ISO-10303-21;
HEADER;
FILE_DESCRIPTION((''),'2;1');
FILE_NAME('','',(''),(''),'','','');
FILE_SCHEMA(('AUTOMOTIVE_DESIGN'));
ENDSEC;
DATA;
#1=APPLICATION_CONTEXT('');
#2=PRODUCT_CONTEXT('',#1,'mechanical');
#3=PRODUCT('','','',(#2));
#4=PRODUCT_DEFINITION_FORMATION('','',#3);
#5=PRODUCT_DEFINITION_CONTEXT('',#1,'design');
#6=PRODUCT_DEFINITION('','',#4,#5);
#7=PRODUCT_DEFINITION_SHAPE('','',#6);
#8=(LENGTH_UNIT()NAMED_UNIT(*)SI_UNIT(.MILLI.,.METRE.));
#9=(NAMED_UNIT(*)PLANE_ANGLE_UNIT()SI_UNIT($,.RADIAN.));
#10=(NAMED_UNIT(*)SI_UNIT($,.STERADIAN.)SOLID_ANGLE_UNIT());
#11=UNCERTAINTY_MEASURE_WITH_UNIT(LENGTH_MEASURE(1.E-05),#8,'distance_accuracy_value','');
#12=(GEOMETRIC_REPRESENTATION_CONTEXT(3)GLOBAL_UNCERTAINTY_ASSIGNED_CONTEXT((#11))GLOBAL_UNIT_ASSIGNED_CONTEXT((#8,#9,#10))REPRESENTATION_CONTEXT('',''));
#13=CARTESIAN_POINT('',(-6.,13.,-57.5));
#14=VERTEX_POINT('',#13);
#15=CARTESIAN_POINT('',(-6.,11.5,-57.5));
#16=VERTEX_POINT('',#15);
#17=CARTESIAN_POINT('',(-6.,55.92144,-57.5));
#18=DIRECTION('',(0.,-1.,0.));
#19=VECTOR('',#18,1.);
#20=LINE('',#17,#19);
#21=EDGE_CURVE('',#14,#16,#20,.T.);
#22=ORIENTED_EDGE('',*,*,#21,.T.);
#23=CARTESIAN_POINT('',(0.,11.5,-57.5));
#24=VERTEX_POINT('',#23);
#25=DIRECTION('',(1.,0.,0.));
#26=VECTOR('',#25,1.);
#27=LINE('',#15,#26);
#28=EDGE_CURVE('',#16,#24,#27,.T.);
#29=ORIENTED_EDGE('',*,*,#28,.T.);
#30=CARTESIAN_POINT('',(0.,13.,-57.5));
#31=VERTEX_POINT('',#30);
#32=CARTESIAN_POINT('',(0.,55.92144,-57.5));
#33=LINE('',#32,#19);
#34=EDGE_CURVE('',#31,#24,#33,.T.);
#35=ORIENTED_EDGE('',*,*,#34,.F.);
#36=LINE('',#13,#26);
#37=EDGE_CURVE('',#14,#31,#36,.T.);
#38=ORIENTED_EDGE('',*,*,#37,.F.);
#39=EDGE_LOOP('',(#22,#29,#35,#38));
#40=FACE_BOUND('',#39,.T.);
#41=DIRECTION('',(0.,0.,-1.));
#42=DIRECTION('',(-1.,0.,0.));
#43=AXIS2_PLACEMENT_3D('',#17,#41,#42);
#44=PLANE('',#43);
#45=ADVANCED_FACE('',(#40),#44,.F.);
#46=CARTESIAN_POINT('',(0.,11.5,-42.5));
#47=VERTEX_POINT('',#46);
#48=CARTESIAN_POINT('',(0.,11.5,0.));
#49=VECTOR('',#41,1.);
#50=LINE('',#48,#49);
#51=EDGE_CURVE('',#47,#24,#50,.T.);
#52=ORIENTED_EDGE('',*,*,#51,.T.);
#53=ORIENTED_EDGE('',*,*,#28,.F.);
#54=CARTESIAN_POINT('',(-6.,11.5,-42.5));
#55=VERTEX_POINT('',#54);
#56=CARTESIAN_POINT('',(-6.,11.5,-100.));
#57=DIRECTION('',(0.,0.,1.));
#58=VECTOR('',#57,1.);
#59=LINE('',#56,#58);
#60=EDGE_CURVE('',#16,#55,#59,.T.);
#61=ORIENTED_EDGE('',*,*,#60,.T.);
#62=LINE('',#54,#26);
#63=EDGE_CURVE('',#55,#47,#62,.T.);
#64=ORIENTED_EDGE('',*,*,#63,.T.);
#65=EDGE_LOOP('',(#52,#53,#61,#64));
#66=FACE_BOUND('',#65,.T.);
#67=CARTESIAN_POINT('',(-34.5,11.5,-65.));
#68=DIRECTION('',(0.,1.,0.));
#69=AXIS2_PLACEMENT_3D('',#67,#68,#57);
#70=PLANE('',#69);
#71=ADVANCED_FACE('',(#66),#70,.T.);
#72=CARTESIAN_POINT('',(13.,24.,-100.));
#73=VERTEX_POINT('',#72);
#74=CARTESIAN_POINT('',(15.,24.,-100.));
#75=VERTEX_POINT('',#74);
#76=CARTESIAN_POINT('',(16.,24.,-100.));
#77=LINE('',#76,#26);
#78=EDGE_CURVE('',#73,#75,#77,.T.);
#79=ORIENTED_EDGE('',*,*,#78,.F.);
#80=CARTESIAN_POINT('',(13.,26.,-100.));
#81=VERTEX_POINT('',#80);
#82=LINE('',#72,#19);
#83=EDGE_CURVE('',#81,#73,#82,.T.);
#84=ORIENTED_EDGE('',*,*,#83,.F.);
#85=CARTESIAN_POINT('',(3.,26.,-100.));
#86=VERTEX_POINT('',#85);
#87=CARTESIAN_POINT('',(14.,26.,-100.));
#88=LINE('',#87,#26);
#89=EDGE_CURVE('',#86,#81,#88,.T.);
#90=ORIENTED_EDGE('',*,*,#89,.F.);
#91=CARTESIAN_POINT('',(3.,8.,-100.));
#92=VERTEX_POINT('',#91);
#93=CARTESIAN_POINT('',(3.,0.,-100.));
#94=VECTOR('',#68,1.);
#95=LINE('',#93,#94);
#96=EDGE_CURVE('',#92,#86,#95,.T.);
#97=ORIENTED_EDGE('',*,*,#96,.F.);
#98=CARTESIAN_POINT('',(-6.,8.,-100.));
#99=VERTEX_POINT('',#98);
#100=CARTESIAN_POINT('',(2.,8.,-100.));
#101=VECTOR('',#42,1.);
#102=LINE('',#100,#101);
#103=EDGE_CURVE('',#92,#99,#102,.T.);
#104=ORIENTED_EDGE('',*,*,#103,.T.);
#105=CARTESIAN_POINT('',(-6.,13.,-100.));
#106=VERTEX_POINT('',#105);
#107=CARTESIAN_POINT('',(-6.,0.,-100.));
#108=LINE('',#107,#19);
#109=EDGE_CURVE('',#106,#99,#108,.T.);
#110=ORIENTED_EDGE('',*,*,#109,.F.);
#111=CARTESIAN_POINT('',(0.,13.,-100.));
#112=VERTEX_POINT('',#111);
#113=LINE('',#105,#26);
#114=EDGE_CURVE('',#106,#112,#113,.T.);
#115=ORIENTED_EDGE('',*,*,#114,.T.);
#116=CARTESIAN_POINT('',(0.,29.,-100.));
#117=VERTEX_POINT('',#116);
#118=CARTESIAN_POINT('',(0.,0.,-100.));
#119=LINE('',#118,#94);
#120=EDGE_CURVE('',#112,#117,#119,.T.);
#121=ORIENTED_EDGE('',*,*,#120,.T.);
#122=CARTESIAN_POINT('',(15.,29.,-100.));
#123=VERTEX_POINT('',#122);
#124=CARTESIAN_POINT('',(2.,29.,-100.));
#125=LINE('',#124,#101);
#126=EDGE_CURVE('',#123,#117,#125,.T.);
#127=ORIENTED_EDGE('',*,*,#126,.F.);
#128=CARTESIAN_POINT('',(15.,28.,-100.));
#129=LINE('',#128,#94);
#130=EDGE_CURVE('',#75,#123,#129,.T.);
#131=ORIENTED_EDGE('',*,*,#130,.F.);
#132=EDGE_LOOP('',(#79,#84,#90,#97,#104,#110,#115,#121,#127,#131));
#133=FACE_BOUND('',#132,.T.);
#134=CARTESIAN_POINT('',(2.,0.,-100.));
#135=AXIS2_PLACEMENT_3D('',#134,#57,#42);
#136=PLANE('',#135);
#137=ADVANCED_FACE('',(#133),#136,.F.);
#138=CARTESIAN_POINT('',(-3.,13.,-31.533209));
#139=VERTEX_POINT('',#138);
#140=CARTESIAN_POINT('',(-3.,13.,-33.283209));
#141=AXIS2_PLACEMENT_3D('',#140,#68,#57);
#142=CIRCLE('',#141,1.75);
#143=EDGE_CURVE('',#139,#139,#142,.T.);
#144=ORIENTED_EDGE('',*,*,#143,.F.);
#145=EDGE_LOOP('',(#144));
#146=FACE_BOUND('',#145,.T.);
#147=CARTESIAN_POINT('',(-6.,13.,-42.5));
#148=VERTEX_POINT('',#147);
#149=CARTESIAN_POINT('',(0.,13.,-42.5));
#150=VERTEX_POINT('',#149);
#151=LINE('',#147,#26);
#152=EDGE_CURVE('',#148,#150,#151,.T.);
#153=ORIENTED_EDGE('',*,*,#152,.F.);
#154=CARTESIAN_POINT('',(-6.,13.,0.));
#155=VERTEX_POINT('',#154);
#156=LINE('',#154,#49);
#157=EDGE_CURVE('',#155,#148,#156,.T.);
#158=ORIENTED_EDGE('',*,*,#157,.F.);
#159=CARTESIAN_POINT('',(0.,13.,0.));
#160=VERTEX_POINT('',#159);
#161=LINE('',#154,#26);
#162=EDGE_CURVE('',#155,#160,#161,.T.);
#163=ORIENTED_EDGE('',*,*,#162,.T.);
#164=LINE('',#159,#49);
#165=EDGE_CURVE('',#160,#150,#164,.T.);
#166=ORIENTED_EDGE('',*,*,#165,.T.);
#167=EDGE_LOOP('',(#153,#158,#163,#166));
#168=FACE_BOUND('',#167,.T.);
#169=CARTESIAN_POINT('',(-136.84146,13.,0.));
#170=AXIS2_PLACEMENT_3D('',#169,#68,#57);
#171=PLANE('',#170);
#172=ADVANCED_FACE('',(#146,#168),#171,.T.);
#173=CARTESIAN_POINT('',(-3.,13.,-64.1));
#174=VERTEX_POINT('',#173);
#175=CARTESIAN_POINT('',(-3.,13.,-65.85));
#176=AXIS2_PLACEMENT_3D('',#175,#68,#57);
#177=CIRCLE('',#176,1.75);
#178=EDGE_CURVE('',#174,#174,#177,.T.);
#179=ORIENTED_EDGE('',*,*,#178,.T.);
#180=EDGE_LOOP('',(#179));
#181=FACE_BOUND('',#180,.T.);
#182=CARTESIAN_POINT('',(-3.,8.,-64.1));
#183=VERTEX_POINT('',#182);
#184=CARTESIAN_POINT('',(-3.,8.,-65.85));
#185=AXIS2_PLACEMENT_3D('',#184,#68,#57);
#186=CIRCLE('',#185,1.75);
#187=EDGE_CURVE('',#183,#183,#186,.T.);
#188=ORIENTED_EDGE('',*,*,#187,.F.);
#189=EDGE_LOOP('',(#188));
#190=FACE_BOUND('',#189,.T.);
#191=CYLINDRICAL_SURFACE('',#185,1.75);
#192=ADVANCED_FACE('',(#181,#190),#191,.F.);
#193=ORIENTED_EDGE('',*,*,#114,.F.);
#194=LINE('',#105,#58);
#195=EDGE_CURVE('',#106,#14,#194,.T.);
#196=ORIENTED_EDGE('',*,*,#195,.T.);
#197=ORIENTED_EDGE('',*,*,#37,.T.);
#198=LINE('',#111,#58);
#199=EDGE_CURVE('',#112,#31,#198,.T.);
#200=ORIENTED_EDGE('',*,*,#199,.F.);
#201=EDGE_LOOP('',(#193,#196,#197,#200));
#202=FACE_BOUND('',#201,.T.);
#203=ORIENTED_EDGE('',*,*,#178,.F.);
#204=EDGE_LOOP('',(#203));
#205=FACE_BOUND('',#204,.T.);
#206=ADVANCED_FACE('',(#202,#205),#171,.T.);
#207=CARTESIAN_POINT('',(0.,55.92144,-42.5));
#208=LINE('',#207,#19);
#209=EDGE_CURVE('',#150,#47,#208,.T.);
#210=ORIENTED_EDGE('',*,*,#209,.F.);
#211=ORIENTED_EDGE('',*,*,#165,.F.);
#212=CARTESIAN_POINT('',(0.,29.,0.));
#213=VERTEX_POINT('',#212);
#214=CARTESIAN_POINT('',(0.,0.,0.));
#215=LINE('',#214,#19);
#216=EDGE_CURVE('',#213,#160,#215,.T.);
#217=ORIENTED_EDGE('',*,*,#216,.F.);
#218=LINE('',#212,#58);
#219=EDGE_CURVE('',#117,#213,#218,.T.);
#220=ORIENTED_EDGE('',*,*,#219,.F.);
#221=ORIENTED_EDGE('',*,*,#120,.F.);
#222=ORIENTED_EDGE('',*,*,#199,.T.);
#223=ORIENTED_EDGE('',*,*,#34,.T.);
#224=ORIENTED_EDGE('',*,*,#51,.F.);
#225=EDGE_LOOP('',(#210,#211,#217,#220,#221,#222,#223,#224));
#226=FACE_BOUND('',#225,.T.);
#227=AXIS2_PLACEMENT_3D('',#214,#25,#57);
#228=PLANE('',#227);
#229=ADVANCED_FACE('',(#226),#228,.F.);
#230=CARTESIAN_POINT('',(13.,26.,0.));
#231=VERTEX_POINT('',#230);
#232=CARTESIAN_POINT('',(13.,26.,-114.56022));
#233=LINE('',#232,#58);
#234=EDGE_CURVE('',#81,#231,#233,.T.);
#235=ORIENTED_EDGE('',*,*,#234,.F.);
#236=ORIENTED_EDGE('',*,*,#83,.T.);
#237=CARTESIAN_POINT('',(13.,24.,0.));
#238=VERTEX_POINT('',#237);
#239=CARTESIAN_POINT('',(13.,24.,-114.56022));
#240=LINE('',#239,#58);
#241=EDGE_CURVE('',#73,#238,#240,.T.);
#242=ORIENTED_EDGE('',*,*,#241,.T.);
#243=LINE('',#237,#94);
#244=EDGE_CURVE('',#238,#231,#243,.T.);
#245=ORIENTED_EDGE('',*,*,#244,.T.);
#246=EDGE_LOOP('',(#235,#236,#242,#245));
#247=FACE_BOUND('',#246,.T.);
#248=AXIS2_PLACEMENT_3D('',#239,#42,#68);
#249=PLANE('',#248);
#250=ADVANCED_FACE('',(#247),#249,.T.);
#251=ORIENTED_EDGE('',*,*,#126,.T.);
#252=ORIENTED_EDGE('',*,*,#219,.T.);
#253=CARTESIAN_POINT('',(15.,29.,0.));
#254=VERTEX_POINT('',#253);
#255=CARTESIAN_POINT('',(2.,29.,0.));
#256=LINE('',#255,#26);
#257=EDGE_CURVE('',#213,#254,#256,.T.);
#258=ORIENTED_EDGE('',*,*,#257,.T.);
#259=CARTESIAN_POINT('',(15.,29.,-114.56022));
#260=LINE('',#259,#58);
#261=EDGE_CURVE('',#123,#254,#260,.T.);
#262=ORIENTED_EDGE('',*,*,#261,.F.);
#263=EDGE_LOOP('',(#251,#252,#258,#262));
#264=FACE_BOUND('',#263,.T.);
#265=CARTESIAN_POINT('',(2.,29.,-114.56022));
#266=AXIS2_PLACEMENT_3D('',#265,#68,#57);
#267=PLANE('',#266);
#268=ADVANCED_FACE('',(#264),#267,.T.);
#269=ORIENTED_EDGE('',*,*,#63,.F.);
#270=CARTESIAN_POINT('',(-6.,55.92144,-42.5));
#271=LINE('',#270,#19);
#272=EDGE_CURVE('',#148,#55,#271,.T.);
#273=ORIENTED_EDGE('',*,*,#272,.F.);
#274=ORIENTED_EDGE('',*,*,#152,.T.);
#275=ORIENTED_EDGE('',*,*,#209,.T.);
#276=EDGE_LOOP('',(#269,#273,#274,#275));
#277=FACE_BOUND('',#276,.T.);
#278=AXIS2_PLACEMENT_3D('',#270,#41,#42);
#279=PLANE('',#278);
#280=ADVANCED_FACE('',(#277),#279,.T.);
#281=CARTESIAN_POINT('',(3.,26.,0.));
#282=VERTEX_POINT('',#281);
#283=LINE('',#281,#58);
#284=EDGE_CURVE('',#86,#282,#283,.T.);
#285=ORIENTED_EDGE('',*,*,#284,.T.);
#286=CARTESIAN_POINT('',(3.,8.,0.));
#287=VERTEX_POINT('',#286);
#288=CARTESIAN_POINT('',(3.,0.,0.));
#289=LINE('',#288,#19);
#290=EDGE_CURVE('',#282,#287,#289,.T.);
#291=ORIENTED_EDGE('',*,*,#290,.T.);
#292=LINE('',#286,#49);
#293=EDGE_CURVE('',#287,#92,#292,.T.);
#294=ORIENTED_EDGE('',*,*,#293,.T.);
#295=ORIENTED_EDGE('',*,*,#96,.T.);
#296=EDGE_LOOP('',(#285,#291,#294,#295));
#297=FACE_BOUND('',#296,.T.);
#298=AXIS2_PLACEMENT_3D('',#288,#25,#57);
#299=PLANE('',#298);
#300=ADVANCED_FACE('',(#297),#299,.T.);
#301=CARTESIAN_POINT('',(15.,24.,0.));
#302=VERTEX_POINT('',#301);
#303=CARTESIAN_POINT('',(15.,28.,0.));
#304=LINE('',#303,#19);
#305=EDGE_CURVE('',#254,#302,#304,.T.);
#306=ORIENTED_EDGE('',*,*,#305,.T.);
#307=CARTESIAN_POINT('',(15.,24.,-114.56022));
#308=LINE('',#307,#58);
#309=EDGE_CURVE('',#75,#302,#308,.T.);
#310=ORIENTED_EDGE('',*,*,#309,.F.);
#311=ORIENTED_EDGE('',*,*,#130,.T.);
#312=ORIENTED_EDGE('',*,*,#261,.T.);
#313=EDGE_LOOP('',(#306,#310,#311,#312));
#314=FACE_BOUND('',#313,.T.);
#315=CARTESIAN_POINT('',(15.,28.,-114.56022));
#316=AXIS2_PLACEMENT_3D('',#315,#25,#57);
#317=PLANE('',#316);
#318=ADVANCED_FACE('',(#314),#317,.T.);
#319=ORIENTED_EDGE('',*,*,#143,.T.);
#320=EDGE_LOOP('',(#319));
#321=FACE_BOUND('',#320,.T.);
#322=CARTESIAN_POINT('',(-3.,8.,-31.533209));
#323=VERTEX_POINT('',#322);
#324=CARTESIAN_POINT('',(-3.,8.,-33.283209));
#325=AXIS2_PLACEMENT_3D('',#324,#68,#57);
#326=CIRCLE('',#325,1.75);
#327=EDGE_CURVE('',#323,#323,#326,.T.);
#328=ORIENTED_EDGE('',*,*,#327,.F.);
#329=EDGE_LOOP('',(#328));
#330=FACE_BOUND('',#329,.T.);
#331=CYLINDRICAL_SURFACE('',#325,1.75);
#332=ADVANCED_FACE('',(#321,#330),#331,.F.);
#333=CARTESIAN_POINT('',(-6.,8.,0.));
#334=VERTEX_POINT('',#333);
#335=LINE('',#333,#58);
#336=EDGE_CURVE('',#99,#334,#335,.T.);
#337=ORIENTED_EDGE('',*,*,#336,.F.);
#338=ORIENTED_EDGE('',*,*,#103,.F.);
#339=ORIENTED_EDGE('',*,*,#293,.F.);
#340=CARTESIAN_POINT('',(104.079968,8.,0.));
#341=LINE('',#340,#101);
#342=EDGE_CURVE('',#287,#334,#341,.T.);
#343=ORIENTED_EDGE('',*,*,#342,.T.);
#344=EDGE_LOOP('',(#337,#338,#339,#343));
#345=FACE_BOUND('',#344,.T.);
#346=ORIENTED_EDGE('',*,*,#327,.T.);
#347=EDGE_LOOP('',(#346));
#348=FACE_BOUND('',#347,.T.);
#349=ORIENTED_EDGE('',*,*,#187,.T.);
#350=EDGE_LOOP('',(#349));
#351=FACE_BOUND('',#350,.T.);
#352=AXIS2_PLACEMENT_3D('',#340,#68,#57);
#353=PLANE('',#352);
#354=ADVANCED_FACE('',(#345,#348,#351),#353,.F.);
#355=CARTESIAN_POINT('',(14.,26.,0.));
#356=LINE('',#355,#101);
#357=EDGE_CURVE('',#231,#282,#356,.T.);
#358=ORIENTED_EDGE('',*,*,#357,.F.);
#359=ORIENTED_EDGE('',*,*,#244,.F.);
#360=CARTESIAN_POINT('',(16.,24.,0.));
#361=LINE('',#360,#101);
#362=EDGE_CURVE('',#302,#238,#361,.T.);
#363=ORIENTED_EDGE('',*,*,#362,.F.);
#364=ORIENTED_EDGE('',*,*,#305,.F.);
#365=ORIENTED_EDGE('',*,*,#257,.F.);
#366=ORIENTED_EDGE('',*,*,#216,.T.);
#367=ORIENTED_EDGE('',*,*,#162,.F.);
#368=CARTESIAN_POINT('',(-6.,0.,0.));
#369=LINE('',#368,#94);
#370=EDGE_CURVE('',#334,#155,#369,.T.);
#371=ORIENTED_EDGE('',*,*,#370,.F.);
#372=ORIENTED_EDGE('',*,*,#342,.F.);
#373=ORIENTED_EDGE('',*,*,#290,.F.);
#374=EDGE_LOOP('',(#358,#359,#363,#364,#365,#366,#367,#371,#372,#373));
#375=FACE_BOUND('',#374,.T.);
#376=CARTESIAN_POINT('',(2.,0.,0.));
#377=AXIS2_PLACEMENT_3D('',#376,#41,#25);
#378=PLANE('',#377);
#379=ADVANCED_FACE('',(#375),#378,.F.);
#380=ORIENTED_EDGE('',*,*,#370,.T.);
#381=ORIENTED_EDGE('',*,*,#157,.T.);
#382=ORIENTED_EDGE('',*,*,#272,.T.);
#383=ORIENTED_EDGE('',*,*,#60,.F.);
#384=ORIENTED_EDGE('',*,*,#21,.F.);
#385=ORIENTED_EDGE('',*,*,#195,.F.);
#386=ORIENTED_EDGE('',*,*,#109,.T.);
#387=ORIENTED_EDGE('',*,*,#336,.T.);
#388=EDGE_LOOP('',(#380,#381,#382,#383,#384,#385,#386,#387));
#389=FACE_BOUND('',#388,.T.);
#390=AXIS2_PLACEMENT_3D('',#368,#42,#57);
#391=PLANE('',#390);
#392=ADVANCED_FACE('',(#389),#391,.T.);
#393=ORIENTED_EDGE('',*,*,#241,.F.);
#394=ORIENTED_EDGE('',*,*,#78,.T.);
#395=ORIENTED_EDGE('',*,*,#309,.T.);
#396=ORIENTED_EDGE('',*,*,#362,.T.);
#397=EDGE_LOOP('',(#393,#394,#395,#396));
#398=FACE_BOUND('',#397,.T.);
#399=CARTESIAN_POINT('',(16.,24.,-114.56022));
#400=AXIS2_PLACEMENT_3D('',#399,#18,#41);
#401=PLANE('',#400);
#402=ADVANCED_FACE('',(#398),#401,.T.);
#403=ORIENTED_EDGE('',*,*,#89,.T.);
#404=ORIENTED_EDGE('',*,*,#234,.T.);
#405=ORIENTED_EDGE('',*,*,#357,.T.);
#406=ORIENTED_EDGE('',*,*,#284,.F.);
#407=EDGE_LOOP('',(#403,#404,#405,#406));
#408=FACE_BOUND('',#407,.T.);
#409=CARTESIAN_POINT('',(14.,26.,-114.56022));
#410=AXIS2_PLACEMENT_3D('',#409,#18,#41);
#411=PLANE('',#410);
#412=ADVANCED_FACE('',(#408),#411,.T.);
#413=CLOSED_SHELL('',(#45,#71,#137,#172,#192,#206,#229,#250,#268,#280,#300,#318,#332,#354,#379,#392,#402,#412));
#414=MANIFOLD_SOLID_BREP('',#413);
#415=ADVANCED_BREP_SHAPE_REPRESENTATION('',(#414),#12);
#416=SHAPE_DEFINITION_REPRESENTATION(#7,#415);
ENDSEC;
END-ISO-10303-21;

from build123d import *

# Parameters (mm, degrees)
SKETCH1_W            = 100
SKETCH1_H            = 26
BOSS_EXTRUDE1_DEPTH  = 2
BOSS_EXTRUDE2_DEPTH  = 100
MOVE_START           = -100
MOVE_FACE1_OUTLINE_W = 2
MOVE_FACE1_OUTLINE_H = 28
MOVE_FACE1_DEPTH     = 100
SKETCH5_W            = 100
SKETCH5_H            = 4
BOSS_EXTRUDE3_DEPTH  = 6
SKETCH6_W            = 100
SKETCH6_H            = 4
BOSS_EXTRUDE4_DEPTH  = 4
SKETCH7_W            = 6
SKETCH7_H            = 100
BOSS_EXTRUDE5_DEPTH  = 11.5
MOVE_FACE2_BY        = 12
SKETCH8_W            = 6
SKETCH8_H            = 42.5
BOSS_EXTRUDE6_DEPTH  = 1.5
SKETCH9_R            = 1.75
CUT_EXTRUDE1_DEPTH   = 103.376755174
MOVE_FACE3_BY        = 1
MOVE_FACE3_2_BY      = 1
MOVE_FACE3_3_BY      = 1
MOVE_FACE4_BY        = 1


# Read off the part's stored shape, not the designer's step: Move Face1
with BuildPart() as part:
    # Sketch1 → Boss-Extrude1 (new body)
    with BuildSketch(Plane(origin=(0, 0, 0), x_dir=(0, 0, -1), z_dir=(1, 0, 0))):
        with Locations((50, 13)):
            Rectangle(SKETCH1_W, SKETCH1_H)
    extrude(amount=BOSS_EXTRUDE1_DEPTH)

    # Sketch2 → Boss-Extrude2 (add)
    with BuildSketch(Plane.XY):
        Polygon((2, 26), (2, 28), (-12, 28), (-12, 24), (-10, 24), (-10, 26), align=None)
    extrude(amount=-BOSS_EXTRUDE2_DEPTH)


with BuildPart() as body_2:
    # Mirror1: mirrored copy
    add(part.part.mirror(Plane.ZY.offset(-2)))

    # Move Face1 outline → Move Face1 (add)
    with BuildSketch(Plane.XY.offset(MOVE_START)):
        with Locations((1, 14)):
            Rectangle(MOVE_FACE1_OUTLINE_W, MOVE_FACE1_OUTLINE_H)
    extrude(amount=MOVE_FACE1_DEPTH)



with BuildPart() as body_2_2:
    # Sketch5 → Boss-Extrude3 (new body)
    with BuildSketch(Plane.ZY):
        with Locations((-50, -2)):
            Rectangle(SKETCH5_W, SKETCH5_H)
    extrude(amount=BOSS_EXTRUDE3_DEPTH)


with BuildPart() as body_2_1:
    add(body_2.part)

    add(body_2_2.part)  # Boss-Extrude4 merges body 2 2
    # Sketch6 → Boss-Extrude4 (add)
    with BuildSketch(Plane(origin=(0, 0, 0), x_dir=(0, 0, -1), z_dir=(1, 0, 0))):
        with Locations((50, -2)):
            Rectangle(SKETCH6_W, SKETCH6_H)
    extrude(amount=BOSS_EXTRUDE4_DEPTH)

    # Sketch7 → Boss-Extrude5 (add)
    with BuildSketch(Plane(origin=(0, 0, 0), x_dir=(1, 0, 0), z_dir=(0, 1, 0))):
        with Locations((-3, 50)):
            Rectangle(SKETCH7_W, SKETCH7_H)
    extrude(amount=BOSS_EXTRUDE5_DEPTH)

    # Move Face2: a face moved inward by 12.0
    extrude(body_2_1.faces().sort_by_distance((-1, -4, -50))[0], amount=MOVE_FACE2_BY, dir=(0, 1, 0), mode=Mode.SUBTRACT)

    # Sketch8 → Boss-Extrude6 (add)
    with BuildSketch(Plane(origin=(0, 11.5, 0), x_dir=(1, 0, 0), z_dir=(0, 1, 0))):
        with Locations((-3, 78.75)):
            Rectangle(SKETCH8_W, SKETCH8_H)
        with Locations((-3, 21.25)):
            Rectangle(SKETCH8_W, SKETCH8_H)
    extrude(amount=BOSS_EXTRUDE6_DEPTH)

    # Sketch9 → Cut-Extrude1 (cut, through all)
    with BuildSketch(Plane(origin=(0, 13, 0), x_dir=(1, 0, 0), z_dir=(0, 1, 0))):
        with Locations(Location((-3, 33.28320942, 0), (0, 0, 270))):
            Circle(SKETCH9_R)
        with Locations(Location((-3, 65.85, 0), (0, 0, 270))):
            Circle(SKETCH9_R)
    extrude(amount=-CUT_EXTRUDE1_DEPTH, mode=Mode.SUBTRACT)

    # Move Face3: a face moved inward by 1.0
    extrude(body_2_1.faces().sort_by_distance((16, 26, -50))[0], amount=MOVE_FACE3_BY, dir=(-1, 0, 0), mode=Mode.SUBTRACT)

    # Move Face3 2: a face moved inward by 1.0
    extrude(body_2_1.faces().sort_by_distance((4, 17, -50))[0], amount=MOVE_FACE3_2_BY, dir=(-1, 0, 0), mode=Mode.SUBTRACT)

    # Move Face3 3: a face moved outward by 1.0
    extrude(body_2_1.faces().sort_by_distance((14, 25, -50))[0], amount=MOVE_FACE3_3_BY, dir=(-1, 0, 0))

    # Move Face4: a face moved outward by 1.0
    extrude(body_2_1.faces().sort_by_distance((7.5, 28, -50))[0], amount=MOVE_FACE4_BY, dir=(0, 1, 0))


solid = body_2_1.part
